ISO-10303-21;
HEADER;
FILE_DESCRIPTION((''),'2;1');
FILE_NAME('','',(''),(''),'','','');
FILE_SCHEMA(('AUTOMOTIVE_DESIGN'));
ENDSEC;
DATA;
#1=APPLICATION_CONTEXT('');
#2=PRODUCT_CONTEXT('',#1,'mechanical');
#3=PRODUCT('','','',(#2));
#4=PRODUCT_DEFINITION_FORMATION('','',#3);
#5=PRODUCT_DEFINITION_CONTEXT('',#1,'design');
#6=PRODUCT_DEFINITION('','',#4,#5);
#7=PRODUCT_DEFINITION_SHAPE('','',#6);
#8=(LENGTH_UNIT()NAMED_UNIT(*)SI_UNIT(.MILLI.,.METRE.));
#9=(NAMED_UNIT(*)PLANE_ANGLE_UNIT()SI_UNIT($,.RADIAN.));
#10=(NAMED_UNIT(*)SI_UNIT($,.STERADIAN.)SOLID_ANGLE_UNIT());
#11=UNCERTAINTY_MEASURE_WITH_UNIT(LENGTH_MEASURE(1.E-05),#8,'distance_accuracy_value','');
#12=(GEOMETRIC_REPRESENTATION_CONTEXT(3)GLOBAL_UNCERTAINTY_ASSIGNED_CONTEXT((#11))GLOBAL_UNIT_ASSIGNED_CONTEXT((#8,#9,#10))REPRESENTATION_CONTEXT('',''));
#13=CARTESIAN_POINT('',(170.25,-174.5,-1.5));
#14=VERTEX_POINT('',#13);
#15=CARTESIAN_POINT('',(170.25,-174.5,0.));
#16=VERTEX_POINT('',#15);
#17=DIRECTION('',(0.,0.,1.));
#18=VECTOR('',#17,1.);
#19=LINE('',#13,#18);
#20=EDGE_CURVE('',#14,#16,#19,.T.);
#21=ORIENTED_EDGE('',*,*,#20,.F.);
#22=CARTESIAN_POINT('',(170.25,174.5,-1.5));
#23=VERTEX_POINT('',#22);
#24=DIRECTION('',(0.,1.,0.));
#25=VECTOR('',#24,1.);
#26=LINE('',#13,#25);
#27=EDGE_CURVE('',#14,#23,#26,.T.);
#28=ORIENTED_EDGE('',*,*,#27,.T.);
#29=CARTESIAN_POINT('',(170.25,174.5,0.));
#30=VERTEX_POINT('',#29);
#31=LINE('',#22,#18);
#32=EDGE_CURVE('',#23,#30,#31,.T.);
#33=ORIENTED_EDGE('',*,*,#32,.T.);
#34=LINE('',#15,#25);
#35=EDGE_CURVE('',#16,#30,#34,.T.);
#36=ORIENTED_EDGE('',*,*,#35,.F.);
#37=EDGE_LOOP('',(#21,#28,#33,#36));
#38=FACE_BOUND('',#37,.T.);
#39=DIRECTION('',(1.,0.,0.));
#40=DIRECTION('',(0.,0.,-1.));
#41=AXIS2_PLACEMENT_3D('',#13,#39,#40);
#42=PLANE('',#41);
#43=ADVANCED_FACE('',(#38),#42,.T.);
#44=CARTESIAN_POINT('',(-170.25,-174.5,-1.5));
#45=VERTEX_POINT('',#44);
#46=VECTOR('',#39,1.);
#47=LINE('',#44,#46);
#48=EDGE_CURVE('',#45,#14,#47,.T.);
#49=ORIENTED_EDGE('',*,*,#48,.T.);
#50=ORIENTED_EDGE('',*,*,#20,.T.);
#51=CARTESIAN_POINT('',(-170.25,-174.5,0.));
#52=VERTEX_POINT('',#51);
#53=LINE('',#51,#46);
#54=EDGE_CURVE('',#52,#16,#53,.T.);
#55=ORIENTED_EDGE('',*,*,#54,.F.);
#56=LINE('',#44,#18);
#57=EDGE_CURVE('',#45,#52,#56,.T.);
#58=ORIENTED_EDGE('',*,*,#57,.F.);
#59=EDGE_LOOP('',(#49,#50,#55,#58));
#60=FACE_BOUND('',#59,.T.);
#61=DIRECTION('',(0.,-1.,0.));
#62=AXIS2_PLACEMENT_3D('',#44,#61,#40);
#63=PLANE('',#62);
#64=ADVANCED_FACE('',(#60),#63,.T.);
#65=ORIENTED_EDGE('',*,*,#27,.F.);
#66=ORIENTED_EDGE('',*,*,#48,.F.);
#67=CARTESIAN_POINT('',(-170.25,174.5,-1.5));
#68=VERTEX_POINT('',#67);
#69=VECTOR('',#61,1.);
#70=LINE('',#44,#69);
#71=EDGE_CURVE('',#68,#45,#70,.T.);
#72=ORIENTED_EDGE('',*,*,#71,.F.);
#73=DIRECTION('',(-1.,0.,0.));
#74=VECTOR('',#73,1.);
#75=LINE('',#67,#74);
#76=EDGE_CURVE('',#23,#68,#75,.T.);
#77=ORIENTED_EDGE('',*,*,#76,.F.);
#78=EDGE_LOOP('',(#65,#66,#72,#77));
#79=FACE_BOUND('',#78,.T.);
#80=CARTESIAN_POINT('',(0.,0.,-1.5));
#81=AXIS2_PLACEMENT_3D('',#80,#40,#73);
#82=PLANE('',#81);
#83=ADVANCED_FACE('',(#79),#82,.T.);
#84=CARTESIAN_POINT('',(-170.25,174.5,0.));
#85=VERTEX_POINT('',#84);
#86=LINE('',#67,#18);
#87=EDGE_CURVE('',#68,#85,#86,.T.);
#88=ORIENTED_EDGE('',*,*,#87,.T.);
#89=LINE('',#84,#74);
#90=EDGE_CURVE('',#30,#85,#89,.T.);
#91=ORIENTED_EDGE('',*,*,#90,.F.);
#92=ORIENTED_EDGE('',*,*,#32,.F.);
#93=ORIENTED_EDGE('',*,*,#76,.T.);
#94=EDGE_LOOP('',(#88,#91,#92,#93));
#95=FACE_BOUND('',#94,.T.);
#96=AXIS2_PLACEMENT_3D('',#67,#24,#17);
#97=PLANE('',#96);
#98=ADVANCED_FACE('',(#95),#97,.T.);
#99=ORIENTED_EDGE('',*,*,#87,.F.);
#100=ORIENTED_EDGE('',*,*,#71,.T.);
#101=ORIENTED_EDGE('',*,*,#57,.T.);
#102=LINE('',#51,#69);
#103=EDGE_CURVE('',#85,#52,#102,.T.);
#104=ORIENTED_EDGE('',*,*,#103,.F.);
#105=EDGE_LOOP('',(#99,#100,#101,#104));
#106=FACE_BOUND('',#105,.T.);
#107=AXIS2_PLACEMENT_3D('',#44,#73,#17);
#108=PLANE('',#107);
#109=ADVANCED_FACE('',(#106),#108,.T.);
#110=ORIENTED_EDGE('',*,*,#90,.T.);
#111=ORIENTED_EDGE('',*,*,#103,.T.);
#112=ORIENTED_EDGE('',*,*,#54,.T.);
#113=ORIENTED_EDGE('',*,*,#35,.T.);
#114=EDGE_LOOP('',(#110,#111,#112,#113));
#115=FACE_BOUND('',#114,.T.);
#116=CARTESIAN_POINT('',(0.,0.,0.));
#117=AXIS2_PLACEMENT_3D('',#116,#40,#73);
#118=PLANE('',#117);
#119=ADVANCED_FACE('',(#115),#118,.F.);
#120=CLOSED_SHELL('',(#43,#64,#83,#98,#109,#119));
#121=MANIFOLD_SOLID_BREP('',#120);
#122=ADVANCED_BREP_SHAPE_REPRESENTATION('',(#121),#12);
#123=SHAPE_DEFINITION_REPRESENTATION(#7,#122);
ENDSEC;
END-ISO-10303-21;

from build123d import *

# Parameters (mm, degrees)
SKETCH1_W          = 340.5
SKETCH1_H          = 349
BASE_FLANGE1_DEPTH = 1.5


# Sheet-metal steps are written as plain solids
with BuildPart() as part:
    # Sketch1 → Base-Flange1 (new body)
    with BuildSketch(Plane.XY):
        Rectangle(SKETCH1_W, SKETCH1_H)
    extrude(amount=-BASE_FLANGE1_DEPTH)


solid = part.part
